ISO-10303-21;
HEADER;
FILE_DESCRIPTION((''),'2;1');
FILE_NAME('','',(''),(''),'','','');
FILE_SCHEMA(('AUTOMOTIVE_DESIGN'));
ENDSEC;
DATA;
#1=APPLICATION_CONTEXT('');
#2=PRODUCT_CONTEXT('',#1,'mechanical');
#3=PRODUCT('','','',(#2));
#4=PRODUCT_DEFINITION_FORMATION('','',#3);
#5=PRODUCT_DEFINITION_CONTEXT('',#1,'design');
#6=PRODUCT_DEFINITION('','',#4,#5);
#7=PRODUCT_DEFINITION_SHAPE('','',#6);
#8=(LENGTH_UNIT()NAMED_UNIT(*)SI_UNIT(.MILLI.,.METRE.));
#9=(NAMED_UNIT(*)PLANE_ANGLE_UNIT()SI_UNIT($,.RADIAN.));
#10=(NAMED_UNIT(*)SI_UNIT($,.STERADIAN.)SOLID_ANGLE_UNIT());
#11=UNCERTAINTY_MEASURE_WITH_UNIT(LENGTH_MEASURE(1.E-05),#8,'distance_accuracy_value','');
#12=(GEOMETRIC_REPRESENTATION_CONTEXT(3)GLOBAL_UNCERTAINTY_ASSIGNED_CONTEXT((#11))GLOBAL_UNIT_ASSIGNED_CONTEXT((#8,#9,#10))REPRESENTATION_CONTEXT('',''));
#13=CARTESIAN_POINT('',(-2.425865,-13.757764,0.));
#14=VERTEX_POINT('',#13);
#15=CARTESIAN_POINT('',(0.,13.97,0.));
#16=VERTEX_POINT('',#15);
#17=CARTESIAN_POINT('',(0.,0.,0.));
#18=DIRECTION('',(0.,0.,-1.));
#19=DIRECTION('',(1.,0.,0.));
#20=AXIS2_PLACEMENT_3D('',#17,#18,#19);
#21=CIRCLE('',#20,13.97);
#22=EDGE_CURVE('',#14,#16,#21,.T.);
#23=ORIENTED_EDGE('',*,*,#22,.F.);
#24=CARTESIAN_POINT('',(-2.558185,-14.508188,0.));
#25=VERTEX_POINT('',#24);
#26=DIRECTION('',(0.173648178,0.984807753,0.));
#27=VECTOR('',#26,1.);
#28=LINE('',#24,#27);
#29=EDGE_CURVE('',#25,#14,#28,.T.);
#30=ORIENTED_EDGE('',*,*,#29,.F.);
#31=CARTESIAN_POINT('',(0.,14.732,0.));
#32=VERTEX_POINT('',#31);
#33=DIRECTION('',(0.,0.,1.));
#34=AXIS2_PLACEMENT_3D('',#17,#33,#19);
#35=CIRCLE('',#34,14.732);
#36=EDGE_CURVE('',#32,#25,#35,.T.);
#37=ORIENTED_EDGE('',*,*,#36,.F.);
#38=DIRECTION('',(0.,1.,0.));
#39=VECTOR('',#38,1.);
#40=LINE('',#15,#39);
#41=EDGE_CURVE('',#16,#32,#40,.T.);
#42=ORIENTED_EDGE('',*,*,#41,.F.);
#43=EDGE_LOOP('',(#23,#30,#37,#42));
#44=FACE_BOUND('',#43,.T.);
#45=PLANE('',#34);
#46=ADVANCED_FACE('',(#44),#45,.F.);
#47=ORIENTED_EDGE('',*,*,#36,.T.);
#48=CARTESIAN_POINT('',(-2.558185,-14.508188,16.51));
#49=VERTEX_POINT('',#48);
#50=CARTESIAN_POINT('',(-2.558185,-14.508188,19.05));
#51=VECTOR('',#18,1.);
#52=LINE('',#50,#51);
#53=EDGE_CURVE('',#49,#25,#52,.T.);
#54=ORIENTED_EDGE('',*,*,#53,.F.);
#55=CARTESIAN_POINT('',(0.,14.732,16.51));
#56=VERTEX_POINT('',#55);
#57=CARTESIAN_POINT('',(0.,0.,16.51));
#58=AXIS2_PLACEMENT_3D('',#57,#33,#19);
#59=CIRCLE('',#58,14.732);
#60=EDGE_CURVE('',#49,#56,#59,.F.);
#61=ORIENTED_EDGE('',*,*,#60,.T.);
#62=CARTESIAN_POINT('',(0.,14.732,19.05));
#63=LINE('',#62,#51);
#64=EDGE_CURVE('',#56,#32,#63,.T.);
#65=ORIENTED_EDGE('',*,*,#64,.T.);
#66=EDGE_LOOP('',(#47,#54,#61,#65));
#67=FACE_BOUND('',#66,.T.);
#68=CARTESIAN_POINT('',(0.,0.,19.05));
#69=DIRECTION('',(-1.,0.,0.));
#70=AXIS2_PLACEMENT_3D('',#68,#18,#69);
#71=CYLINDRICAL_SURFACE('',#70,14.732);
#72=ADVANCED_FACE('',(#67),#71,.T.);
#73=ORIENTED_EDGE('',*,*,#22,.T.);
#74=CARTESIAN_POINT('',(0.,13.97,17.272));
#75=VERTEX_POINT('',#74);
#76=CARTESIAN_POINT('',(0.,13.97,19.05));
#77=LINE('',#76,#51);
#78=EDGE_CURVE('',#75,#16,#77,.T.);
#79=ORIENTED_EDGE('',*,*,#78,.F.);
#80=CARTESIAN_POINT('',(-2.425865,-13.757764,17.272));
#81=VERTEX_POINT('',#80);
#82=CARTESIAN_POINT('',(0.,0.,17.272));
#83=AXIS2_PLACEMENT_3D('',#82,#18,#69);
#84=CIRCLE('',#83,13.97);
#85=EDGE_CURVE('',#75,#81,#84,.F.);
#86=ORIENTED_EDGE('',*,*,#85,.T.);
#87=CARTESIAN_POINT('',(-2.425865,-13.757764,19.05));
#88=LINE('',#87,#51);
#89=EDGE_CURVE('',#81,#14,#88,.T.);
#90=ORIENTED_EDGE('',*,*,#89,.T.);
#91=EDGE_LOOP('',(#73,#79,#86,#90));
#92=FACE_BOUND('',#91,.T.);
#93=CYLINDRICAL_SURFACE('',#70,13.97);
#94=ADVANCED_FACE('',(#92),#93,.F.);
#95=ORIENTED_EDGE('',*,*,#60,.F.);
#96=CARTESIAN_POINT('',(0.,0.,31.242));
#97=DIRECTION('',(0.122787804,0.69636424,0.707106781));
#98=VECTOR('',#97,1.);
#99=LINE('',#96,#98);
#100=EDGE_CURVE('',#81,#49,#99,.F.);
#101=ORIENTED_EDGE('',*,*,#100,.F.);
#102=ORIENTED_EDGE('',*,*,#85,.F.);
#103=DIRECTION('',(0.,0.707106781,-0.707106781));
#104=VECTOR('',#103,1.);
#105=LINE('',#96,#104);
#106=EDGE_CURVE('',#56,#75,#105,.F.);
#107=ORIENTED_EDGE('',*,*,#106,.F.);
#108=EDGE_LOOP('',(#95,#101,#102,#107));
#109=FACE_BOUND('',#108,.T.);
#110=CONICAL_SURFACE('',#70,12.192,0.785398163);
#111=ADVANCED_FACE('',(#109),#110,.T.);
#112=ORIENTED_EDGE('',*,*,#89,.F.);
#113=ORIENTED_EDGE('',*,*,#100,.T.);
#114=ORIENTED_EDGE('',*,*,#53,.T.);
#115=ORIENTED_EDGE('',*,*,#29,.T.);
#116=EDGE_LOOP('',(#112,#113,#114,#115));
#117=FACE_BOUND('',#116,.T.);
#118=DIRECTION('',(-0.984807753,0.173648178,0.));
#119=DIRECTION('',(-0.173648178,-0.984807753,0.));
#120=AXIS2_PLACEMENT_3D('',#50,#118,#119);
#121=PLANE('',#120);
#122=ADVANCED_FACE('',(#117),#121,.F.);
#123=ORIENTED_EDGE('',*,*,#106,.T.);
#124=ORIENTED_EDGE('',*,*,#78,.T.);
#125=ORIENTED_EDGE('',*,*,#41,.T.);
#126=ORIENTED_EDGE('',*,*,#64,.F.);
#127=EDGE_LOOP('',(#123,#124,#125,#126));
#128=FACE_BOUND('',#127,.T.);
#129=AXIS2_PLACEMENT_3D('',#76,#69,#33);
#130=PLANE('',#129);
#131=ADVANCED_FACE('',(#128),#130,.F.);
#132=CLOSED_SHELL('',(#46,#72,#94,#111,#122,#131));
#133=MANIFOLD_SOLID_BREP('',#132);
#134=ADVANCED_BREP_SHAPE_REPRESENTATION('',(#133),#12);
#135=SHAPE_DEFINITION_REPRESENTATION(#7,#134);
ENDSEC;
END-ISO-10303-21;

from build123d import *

# Parameters (mm, degrees)
BOSS_EXTRUDE1_DEPTH = 19.05
CHAMFER1_SIZE       = 2.54


with BuildPart() as part:
    # Sketch1 → Boss-Extrude1 (new body)
    with BuildSketch(Plane.XY):
        with BuildLine():
            Line((-2.558184953, -14.508187817), (-2.425865042, -13.75776431))
            ThreePointArc((-2.425865042, -13.75776431), (-13.916839932, 1.217565726), (0, 13.97))
            Line((0, 13.97), (0, 14.732))
            ThreePointArc((0, 14.732), (-14.675940292, 1.283978402), (-2.558184953, -14.508187817))
        make_face()
    extrude(amount=BOSS_EXTRUDE1_DEPTH)

    # Chamfer1
    # the kernel refuses this chamfer: 2.54 mm, written as the material it takes off along each edge
    with BuildSketch(Plane(origin=(0, 0, 19.05), x_dir=(0.42958176080466437, 0.9030279678858038, 0), z_dir=(0.9030279678858038, -0.42958176080466437, 0))) as chamfer1_piece_1:
        Polygon((14.732, -CHAMFER1_SIZE), (14.732 - CHAMFER1_SIZE, 0), (14.732, 0), align=None)
    revolve(axis=Axis((0, 0, 19.05), (0, 0, 1)), revolution_arc=220.882041127, mode=Mode.SUBTRACT)


solid = part.part
